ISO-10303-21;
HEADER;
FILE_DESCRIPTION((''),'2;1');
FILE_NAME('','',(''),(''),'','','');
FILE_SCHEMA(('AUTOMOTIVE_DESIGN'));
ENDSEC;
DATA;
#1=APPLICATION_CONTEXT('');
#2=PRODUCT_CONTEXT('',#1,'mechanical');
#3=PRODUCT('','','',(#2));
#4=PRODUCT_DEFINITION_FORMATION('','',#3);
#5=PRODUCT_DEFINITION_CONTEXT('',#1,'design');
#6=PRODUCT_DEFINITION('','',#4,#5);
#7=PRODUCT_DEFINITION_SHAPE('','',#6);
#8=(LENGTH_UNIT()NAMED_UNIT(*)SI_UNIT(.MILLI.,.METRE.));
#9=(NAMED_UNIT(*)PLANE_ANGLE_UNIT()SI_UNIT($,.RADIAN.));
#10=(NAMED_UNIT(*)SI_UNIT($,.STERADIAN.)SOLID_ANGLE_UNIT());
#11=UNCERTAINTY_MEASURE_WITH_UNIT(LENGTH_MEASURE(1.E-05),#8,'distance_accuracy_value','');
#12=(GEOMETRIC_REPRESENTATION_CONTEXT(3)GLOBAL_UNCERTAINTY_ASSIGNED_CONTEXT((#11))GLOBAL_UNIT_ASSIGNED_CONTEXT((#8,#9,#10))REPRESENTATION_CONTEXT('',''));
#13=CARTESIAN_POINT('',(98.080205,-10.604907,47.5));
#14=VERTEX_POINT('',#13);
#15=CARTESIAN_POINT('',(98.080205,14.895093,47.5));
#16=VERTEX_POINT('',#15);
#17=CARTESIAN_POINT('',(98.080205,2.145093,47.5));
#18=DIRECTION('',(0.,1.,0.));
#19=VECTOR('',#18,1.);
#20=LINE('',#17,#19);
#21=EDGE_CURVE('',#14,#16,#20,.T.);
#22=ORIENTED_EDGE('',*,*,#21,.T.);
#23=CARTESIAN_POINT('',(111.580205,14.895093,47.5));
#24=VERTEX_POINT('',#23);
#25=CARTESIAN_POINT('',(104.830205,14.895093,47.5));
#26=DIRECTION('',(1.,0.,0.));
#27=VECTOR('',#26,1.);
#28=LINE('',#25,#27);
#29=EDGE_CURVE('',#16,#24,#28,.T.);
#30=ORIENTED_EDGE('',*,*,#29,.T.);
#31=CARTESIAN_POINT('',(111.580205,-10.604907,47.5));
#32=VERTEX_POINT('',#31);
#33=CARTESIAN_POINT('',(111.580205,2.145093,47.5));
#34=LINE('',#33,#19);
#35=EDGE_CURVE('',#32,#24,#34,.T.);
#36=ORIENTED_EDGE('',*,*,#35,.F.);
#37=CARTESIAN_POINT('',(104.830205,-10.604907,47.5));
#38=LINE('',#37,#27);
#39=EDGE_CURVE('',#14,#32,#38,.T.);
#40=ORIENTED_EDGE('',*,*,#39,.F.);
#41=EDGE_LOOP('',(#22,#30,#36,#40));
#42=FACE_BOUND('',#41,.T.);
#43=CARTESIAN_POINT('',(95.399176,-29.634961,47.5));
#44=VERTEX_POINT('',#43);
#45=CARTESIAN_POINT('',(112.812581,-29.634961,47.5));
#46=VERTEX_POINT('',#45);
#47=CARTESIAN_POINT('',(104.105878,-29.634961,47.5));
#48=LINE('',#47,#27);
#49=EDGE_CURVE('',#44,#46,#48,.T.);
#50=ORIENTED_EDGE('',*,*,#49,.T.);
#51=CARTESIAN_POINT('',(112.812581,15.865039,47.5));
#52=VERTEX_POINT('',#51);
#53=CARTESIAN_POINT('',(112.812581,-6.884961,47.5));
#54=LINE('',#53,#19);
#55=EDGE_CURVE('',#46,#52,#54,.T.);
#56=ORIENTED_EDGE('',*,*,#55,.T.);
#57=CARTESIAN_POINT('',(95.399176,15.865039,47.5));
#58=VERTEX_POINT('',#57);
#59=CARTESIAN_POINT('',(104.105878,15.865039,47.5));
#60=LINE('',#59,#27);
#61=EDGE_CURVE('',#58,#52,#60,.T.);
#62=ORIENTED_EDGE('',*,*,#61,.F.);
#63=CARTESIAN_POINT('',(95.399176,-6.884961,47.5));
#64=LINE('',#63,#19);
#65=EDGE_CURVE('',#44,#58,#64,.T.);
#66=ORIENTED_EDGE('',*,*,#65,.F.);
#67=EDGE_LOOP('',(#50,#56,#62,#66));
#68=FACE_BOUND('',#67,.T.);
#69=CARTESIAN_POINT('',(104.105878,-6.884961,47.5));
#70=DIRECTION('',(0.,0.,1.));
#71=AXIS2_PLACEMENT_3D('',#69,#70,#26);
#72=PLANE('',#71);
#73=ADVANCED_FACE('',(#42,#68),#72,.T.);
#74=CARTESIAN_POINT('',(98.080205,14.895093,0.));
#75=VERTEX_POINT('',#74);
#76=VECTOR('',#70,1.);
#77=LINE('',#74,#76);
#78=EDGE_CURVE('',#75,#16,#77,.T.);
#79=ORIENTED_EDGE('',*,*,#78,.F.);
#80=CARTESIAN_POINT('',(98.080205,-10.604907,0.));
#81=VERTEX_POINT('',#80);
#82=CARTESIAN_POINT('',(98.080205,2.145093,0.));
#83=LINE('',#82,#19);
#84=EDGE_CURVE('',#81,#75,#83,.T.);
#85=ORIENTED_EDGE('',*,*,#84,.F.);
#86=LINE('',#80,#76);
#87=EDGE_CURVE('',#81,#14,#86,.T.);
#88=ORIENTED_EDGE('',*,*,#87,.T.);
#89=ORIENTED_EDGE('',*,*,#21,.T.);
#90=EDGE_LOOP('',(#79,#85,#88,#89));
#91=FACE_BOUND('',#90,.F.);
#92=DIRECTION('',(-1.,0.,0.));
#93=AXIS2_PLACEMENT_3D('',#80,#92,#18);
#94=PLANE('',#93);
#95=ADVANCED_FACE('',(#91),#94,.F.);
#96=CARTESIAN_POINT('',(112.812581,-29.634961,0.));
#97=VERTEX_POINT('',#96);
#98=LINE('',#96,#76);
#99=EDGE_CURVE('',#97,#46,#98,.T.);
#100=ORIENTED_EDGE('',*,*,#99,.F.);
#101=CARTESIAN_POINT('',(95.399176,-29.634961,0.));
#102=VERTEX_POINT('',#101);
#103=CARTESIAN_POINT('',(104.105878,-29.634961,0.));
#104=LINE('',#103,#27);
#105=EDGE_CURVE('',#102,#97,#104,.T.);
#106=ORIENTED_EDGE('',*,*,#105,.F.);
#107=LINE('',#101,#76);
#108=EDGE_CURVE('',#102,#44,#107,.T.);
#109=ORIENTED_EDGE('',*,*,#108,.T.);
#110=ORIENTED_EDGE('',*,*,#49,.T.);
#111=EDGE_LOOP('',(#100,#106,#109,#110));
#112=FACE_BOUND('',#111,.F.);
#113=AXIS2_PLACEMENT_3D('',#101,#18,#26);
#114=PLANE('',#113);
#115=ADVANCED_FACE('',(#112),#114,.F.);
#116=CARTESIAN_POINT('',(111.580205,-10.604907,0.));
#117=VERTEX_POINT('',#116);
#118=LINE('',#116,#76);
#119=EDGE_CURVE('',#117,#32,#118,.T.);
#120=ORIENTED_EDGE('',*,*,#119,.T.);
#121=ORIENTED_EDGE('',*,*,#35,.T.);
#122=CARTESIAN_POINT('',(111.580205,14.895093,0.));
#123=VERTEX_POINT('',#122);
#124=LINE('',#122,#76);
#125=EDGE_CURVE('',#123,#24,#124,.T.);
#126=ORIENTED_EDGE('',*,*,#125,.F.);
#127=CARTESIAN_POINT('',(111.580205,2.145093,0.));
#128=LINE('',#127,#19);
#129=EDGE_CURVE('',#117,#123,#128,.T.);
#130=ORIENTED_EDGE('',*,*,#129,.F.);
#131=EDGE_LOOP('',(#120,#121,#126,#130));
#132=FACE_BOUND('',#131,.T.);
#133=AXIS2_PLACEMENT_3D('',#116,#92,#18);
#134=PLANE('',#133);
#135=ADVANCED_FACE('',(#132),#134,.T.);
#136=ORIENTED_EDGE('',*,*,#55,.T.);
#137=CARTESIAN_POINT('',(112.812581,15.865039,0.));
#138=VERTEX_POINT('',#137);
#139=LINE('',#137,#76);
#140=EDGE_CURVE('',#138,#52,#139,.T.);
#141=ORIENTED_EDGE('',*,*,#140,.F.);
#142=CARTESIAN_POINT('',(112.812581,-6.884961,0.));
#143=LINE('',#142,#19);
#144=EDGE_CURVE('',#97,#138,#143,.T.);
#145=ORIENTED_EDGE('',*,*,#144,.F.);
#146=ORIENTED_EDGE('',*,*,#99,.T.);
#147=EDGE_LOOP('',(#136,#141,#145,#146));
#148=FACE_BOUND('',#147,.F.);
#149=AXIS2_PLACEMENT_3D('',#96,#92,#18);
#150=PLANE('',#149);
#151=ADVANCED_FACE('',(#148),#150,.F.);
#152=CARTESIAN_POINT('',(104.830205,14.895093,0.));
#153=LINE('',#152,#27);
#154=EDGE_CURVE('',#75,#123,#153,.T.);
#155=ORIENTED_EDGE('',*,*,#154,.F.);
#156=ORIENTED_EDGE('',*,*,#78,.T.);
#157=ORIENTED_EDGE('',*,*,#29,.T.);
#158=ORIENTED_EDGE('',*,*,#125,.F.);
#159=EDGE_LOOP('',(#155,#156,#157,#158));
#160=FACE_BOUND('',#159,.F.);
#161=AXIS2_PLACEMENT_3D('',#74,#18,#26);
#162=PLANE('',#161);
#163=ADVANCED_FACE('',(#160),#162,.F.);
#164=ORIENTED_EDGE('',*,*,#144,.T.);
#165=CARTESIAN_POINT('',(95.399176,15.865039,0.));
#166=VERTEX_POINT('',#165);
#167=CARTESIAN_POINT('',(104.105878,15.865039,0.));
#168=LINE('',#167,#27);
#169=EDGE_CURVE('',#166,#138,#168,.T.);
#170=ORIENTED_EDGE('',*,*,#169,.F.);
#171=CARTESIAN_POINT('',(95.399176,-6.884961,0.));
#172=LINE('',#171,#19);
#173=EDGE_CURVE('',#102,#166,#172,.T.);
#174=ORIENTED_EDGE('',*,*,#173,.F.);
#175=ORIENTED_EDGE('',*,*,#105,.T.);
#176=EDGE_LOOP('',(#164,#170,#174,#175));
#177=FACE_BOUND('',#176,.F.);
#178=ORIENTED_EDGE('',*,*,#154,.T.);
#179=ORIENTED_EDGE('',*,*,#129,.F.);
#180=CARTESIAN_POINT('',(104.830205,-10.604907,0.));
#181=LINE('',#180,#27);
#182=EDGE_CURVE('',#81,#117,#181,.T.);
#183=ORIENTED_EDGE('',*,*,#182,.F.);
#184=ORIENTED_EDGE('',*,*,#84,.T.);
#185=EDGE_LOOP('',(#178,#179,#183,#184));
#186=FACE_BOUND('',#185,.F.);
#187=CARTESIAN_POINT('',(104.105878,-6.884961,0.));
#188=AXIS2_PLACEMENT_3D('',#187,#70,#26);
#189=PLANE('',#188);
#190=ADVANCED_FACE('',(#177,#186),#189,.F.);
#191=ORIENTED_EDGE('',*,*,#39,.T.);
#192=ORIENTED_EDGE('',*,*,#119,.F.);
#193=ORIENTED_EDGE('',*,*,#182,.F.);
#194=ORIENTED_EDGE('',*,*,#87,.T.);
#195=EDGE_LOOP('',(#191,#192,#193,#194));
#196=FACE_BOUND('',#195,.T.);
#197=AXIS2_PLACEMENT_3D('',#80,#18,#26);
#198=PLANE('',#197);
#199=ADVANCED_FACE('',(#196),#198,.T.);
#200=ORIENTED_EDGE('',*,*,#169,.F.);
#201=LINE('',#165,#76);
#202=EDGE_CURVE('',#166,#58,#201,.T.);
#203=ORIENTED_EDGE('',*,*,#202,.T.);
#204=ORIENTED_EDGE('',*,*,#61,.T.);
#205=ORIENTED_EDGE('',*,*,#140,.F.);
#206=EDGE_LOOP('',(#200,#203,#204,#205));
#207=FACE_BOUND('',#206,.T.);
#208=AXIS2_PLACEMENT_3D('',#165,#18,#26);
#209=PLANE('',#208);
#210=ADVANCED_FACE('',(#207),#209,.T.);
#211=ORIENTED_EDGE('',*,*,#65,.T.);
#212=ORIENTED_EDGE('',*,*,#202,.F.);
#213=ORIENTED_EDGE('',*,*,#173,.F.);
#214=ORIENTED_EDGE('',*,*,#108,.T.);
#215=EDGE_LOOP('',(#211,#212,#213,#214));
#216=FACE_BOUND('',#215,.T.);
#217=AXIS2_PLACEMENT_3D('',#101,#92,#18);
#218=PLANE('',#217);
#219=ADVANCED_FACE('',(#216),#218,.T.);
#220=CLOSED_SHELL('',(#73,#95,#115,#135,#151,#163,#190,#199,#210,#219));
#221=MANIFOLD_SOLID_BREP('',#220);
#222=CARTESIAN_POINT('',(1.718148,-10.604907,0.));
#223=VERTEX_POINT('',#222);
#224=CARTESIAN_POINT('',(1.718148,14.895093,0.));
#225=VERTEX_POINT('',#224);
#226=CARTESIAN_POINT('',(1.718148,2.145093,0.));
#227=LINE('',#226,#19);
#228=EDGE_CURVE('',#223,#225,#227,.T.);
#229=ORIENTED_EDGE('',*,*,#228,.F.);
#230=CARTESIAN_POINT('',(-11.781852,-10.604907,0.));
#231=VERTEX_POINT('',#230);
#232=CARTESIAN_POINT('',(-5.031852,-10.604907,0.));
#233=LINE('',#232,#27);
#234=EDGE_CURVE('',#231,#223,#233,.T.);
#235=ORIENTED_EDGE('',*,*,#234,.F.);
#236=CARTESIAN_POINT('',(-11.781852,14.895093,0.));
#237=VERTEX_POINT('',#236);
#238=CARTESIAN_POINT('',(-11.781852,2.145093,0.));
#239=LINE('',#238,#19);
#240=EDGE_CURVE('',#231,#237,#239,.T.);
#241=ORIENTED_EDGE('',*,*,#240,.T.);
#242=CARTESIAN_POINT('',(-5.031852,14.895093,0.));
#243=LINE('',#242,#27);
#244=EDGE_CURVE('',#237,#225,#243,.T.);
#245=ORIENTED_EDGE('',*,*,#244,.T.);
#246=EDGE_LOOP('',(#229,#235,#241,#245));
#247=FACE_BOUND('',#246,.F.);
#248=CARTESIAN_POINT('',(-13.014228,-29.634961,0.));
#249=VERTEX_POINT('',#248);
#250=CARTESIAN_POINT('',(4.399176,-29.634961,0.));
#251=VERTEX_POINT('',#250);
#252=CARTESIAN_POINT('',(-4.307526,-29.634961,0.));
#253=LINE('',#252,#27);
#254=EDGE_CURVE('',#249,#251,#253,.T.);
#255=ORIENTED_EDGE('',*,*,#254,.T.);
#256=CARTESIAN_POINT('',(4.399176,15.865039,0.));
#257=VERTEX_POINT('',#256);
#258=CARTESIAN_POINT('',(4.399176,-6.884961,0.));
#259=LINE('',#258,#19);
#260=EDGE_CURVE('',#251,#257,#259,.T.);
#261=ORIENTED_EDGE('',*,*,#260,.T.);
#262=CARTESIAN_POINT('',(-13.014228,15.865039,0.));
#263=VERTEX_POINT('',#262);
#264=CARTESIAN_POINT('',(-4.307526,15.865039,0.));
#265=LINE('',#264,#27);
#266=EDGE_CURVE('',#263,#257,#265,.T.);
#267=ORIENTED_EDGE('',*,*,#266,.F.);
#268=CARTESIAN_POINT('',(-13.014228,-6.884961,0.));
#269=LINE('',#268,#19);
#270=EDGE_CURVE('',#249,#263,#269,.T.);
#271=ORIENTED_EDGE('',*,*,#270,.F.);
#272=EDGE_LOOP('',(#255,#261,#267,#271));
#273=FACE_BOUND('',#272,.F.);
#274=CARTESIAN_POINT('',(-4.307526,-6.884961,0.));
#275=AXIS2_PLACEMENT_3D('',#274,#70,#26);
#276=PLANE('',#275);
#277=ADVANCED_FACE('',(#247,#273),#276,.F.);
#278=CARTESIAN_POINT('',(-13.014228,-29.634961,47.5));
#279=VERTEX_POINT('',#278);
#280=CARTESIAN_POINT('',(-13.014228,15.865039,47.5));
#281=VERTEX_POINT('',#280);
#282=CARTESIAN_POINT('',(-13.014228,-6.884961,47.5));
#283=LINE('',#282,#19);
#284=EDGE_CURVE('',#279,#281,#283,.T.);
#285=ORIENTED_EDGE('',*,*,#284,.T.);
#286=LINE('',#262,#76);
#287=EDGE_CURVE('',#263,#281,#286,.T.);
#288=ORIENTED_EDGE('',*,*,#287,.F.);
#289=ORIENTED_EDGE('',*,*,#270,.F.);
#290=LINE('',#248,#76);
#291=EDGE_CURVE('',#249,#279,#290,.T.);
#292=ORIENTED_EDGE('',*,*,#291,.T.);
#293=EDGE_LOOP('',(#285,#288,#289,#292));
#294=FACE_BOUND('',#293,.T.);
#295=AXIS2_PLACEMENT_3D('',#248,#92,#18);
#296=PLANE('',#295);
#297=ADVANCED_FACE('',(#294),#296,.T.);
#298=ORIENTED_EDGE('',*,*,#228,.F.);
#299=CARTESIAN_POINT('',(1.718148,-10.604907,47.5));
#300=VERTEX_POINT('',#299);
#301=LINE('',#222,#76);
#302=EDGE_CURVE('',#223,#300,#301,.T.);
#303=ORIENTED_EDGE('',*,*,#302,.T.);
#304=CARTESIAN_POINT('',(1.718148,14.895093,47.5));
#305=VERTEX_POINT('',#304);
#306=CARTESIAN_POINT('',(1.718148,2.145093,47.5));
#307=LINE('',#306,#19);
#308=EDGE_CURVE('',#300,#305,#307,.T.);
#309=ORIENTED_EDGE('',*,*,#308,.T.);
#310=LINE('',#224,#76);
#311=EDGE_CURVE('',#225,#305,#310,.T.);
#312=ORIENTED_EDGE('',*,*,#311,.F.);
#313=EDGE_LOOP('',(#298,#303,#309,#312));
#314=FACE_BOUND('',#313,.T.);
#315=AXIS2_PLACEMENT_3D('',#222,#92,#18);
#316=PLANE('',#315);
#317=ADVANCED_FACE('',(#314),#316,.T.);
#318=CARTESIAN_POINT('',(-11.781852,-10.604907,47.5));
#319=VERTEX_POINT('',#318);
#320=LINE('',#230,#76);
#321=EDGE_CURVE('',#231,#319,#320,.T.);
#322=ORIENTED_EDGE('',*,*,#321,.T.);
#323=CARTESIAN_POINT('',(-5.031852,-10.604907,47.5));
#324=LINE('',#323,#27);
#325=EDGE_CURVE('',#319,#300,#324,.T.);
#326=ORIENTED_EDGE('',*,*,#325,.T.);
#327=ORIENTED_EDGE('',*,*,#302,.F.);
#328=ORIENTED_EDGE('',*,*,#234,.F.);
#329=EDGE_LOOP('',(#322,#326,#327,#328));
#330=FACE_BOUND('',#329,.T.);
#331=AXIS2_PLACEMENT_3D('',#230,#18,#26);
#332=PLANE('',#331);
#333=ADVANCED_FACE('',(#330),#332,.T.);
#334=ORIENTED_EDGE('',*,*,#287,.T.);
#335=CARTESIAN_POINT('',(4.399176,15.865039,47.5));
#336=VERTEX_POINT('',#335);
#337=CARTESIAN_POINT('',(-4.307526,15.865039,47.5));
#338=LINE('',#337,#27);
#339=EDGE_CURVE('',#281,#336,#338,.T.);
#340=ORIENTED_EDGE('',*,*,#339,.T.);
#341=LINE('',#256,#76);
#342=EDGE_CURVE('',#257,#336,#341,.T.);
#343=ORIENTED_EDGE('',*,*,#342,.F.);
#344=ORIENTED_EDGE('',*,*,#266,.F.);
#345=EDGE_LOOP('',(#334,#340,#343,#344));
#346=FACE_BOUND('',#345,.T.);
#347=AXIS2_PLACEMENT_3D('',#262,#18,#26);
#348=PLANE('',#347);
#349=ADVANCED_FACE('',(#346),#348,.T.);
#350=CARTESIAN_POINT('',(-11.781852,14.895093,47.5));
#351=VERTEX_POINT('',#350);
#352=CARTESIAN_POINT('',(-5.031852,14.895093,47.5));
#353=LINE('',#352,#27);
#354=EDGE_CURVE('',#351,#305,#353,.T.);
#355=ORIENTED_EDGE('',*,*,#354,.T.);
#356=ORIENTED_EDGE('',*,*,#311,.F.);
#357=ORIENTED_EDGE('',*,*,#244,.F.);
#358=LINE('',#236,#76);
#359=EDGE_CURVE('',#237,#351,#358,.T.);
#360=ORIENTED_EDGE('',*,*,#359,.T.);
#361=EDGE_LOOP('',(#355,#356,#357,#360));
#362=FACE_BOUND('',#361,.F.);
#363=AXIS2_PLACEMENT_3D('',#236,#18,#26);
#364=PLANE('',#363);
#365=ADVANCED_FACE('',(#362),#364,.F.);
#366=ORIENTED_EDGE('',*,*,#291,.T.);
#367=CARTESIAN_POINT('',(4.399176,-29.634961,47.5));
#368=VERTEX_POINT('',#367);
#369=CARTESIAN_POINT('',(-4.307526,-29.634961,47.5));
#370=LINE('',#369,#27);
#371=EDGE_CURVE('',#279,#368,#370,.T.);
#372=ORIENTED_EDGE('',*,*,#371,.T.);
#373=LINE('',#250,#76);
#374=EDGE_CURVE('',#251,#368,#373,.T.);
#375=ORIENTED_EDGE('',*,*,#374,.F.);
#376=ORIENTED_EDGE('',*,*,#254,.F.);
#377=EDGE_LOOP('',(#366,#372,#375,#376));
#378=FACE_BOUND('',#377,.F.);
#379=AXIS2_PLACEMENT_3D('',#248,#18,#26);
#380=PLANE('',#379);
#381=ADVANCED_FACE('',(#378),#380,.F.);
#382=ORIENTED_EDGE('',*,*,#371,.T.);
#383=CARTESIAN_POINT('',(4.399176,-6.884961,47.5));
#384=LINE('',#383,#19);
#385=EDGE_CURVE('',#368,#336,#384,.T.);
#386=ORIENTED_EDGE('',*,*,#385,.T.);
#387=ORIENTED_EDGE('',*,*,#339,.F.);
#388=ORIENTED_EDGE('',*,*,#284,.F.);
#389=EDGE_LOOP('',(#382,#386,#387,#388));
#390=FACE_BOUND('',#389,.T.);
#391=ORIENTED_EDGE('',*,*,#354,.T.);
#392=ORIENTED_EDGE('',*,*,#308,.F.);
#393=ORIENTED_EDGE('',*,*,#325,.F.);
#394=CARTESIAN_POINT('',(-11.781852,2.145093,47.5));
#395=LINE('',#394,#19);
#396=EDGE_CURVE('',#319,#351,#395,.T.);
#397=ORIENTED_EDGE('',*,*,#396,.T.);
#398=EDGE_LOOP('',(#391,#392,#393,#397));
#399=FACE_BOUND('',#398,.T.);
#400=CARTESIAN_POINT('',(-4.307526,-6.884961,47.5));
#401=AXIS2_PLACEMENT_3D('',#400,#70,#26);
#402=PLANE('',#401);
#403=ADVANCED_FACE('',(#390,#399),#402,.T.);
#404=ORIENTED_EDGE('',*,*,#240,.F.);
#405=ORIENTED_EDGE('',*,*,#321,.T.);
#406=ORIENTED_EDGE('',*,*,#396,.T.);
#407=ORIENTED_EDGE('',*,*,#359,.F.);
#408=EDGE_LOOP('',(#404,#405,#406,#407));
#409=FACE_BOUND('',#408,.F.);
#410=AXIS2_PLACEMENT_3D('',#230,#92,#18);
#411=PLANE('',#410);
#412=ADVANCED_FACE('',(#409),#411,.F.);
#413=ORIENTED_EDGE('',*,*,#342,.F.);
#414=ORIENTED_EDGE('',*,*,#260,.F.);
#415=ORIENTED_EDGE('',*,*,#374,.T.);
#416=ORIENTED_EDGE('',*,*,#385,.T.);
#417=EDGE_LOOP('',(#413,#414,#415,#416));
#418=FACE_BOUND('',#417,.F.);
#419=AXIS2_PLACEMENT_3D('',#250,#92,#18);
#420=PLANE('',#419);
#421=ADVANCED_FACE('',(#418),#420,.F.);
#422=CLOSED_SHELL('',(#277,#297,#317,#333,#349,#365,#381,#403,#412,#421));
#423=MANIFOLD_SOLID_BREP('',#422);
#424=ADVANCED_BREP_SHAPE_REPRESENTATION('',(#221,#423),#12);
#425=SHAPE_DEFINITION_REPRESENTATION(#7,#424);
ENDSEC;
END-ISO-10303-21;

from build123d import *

# Parameters (mm, degrees)
F0_W     = 17.4134043045
F0_H     = 45.5
F0_W_2   = 13.5
F0_H_2   = 25.5
F1_DEPTH = 47.5


# Not quite as in the source:
# - a feature of the source that left no trace in its solid (it failed there, or was rolled back) is left out


with BuildPart() as f1:
    # F0 (on Top) → F1 (new body)
    with BuildSketch(Plane.XY):
        with Locations((104.1058783736, -6.8849609196)):
            Rectangle(F0_W, F0_H)
        with Locations((104.8302046406, 2.1450929129)):
            Rectangle(F0_W_2, F0_H_2, mode=Mode.SUBTRACT)
    extrude(amount=F1_DEPTH)


with BuildPart() as f1b:
    # F0 (on Top) → F1, piece 2 (new body)
    with BuildSketch(Plane.XY):
        with Locations((-4.3075259309, -6.8849609196)):
            Rectangle(F0_W, F0_H)
        with Locations((-5.0318521979, 2.1450929129)):
            Rectangle(F0_W_2, F0_H_2, mode=Mode.SUBTRACT)
    extrude(amount=F1_DEPTH)


solid = Compound([f1.part, f1b.part])
